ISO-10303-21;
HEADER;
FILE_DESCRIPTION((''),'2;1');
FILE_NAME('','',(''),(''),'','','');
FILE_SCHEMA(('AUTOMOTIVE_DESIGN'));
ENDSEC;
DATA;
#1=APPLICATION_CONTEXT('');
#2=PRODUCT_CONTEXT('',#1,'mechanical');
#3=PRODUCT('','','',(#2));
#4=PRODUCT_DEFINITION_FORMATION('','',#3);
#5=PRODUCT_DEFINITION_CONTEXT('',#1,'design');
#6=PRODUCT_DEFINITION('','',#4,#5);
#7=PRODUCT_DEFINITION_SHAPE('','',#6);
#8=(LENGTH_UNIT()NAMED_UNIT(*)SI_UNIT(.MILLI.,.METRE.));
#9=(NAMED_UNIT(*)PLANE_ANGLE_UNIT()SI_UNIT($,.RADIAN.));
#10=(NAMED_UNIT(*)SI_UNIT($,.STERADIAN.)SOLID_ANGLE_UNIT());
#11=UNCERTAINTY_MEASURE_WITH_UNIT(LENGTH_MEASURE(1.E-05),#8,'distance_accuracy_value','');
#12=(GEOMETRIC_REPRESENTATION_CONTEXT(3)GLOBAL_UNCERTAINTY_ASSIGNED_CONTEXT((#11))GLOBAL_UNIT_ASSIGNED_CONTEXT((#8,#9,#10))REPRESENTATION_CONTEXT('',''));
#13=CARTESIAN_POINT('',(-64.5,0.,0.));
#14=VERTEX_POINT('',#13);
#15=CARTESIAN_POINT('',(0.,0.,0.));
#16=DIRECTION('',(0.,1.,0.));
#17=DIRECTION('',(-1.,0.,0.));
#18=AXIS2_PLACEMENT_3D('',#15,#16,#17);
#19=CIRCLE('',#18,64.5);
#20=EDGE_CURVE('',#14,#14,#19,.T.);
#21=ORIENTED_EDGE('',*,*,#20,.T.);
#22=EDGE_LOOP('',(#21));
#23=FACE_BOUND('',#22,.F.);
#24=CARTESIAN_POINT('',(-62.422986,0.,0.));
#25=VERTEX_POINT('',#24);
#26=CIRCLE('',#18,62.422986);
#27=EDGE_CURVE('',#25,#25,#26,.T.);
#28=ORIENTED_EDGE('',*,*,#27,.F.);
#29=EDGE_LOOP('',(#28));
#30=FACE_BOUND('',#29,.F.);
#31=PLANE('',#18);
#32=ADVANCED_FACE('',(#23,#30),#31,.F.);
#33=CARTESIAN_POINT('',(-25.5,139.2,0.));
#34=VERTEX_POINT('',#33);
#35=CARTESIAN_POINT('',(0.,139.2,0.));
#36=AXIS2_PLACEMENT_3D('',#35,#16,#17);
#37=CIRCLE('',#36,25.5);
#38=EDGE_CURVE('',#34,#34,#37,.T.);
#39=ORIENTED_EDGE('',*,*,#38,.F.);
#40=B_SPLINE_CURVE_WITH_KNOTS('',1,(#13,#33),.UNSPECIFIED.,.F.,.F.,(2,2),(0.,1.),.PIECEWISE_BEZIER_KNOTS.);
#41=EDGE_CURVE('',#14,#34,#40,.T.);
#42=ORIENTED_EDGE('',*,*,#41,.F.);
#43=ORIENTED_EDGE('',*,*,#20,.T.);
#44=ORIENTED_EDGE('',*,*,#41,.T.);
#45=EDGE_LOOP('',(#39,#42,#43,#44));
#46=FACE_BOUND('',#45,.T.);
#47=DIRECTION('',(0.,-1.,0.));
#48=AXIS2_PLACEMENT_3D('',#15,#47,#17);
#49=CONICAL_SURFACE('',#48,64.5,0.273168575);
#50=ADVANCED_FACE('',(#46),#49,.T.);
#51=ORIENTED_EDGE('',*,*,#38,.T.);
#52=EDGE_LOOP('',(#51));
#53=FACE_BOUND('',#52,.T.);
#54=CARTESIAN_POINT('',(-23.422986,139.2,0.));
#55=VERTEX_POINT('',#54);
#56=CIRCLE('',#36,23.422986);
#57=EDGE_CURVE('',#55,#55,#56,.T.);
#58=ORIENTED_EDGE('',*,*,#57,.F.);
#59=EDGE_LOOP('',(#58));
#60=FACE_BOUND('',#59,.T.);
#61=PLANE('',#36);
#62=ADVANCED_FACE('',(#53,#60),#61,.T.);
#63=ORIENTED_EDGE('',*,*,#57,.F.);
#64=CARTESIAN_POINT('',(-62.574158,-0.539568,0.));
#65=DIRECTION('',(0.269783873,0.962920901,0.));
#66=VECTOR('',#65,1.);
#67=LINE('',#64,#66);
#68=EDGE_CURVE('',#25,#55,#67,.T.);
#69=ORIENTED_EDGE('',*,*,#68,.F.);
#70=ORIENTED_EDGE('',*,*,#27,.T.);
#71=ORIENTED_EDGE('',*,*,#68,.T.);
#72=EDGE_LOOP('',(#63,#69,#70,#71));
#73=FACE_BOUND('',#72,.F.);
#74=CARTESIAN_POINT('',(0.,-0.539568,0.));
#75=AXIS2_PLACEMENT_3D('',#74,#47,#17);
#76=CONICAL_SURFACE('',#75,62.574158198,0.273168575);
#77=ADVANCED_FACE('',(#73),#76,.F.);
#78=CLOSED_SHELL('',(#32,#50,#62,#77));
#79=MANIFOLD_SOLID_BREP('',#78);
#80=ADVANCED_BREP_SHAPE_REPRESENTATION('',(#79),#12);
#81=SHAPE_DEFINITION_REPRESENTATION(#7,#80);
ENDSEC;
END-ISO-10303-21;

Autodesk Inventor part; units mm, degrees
ref_plane "YZ Plane" through (0, 0, 0) normal (1, 0, 0) x (0, 1, 0)
ref_plane "XY Plane" through (0, 0, 0) normal (0, 0, 1) x (1, 0, 0)
sketch "Szkic6" plane through (0, 0, 0) normal (0, 1, 0) x (-1, 0, 0)
  circle A0 centre (0, 0) radius 64.5
  dimension "d33" = 129
ref_plane "Płaszczyzna konstrukcyjna1" through (0, 139.2, 0) normal (0, 1, 0) x (-1, 0, 0)
sketch "Szkic7" plane through (0, 139.2, 0) normal (0, 1, 0) x (-1, 0, 0)
  circle A0 centre (0, 0) radius 25.5
  dimension "d35" = 51
loft "Wyciągnięcie złożone1" add profiles "Szkic6", "Szkic7"
shell "Skorupa1" thickness 2 removed faces 2 at (4.5479, 139.2, -4.6843) at (-10.0865, 0, -16.1433)
equation "\"d33\" = OD1"
equation "\"d35\" = OD2"
equation "\"d52\" = THK"
equation "\"SzerokośćGięciaPodcięcia\" = Grubość"
equation "\"RozmiarPodcięciaNarożnika\" = 4 * Grubość"
equation "\"PromieńPrzejścia\" = PromieńGięcia"
equation "\"Rozmiar_promienia_Jacobiego\" = PromieńGięcia"
equation "\"Wielk_odstępu\" = Grubość"
equation "\"d2\" = PromieńGięcia"
equation "\"d23\" = PromieńGięcia"
equation "\"OD1\" = 129"
equation "\"OD2\" = 51"
equation "\"L\" = 139.2"
equation "\"THK\" = 2"
equation "\"d34\" = L"
equation "\"Grubość\" = 1.5"
equation "\"PromieńGięcia\" = 3"
properties part number "Redukcja symetryczna Ø129x51x2 L=139,2" material "304"
